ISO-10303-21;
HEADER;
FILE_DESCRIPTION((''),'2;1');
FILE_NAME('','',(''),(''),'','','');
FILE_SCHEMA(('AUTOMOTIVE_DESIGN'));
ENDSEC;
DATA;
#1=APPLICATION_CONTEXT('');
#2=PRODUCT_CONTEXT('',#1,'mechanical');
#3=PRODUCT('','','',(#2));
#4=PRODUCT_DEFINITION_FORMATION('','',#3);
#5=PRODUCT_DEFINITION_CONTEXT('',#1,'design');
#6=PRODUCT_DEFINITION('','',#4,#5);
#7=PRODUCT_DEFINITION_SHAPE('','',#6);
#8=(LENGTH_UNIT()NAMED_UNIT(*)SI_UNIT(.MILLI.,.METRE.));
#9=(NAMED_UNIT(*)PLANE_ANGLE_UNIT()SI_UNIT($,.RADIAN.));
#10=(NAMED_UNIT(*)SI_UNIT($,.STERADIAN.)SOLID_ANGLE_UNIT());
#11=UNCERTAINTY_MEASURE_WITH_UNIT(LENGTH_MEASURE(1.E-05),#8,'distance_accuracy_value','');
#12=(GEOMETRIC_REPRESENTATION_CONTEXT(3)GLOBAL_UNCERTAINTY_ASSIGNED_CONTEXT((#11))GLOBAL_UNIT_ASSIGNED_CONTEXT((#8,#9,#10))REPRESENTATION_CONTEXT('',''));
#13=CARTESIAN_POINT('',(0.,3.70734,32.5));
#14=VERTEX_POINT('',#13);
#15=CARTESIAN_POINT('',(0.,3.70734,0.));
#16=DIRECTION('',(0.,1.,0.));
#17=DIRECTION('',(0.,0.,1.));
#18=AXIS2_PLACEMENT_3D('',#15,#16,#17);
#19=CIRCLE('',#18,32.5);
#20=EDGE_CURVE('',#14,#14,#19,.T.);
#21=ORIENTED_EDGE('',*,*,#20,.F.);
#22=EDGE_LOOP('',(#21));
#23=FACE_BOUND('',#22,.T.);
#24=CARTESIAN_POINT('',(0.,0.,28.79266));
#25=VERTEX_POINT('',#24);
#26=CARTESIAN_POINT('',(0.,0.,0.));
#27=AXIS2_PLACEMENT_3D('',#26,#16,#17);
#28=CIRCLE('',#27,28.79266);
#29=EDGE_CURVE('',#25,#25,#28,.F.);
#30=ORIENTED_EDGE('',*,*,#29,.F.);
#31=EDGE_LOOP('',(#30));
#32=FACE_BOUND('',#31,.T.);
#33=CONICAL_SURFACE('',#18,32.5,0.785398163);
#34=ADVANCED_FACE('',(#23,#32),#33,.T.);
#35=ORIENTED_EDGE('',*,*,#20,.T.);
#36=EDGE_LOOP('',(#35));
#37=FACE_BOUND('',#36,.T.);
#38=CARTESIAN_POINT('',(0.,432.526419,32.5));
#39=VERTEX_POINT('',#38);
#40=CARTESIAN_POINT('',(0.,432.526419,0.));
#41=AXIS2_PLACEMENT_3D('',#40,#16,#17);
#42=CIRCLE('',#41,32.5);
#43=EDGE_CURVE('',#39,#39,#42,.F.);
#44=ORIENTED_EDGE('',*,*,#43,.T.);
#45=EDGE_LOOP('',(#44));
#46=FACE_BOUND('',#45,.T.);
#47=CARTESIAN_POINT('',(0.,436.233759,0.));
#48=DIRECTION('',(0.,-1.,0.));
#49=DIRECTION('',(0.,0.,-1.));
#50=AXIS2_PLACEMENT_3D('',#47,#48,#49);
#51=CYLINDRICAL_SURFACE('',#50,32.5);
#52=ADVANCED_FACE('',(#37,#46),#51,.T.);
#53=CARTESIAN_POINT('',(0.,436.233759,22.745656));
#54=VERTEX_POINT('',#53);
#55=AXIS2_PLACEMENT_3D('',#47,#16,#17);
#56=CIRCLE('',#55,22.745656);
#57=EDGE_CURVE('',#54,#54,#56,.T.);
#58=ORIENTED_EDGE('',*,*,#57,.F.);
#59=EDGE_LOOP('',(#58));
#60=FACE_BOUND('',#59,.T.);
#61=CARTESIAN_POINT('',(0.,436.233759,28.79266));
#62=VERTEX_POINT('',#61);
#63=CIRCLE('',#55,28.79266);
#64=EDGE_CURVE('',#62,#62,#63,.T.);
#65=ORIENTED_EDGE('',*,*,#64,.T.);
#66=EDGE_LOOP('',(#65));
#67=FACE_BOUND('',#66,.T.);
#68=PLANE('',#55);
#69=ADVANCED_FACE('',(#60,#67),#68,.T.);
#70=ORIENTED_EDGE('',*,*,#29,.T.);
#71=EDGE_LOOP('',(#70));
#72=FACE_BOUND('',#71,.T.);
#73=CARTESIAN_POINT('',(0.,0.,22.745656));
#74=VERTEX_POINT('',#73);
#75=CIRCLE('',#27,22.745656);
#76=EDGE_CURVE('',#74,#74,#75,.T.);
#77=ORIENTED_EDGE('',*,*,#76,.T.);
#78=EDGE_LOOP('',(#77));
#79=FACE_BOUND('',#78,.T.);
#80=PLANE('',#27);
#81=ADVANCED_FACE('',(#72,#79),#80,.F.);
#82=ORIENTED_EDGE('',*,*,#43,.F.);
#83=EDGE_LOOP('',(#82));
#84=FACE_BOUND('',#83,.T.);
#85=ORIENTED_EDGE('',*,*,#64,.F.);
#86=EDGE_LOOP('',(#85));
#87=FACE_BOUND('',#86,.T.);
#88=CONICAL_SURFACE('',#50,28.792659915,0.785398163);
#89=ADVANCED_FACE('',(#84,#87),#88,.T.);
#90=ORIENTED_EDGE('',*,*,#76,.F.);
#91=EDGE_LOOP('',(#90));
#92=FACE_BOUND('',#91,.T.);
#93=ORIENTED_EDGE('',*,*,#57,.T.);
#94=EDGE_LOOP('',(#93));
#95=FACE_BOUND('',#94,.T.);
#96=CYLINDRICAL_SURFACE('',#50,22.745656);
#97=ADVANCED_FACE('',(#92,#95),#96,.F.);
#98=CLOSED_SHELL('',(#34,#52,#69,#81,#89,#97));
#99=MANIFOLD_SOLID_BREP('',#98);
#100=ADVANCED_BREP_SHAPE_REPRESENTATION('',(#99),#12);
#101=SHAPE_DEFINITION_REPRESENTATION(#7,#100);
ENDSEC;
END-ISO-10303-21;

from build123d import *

# Parameters (mm, degrees)
SKETCH1_R           = 32.5
BOSS_EXTRUDE1_DEPTH = 436.233759187
SKETCH2_R           = 22.745655965
CUT_EXTRUDE1_DEPTH  = 439.648370172
CHAMFER1_SIZE       = 3.707340085


with BuildPart() as part:
    # Sketch1 → Boss-Extrude1 (new body)
    with BuildSketch(Plane(origin=(0, 0, 0), x_dir=(1, 0, 0), z_dir=(0, 1, 0))):
        Circle(SKETCH1_R)
    extrude(amount=BOSS_EXTRUDE1_DEPTH)

    # Sketch2 → Cut-Extrude1 (cut, through all)
    with BuildSketch(Plane(origin=(0, 0, 0), x_dir=(1, 0, 0), z_dir=(0, 1, 0))):
        Circle(SKETCH2_R)
    extrude(amount=CUT_EXTRUDE1_DEPTH, mode=Mode.SUBTRACT)

    # Chamfer1
    chamfer1_edges = [part.edges().sort_by_distance(p)[0] for p in [
        (-32.5, 436.233759187, 0),
        (-32.5, 0, 0),
    ]]
    chamfer(chamfer1_edges, length=CHAMFER1_SIZE)


solid = part.part
